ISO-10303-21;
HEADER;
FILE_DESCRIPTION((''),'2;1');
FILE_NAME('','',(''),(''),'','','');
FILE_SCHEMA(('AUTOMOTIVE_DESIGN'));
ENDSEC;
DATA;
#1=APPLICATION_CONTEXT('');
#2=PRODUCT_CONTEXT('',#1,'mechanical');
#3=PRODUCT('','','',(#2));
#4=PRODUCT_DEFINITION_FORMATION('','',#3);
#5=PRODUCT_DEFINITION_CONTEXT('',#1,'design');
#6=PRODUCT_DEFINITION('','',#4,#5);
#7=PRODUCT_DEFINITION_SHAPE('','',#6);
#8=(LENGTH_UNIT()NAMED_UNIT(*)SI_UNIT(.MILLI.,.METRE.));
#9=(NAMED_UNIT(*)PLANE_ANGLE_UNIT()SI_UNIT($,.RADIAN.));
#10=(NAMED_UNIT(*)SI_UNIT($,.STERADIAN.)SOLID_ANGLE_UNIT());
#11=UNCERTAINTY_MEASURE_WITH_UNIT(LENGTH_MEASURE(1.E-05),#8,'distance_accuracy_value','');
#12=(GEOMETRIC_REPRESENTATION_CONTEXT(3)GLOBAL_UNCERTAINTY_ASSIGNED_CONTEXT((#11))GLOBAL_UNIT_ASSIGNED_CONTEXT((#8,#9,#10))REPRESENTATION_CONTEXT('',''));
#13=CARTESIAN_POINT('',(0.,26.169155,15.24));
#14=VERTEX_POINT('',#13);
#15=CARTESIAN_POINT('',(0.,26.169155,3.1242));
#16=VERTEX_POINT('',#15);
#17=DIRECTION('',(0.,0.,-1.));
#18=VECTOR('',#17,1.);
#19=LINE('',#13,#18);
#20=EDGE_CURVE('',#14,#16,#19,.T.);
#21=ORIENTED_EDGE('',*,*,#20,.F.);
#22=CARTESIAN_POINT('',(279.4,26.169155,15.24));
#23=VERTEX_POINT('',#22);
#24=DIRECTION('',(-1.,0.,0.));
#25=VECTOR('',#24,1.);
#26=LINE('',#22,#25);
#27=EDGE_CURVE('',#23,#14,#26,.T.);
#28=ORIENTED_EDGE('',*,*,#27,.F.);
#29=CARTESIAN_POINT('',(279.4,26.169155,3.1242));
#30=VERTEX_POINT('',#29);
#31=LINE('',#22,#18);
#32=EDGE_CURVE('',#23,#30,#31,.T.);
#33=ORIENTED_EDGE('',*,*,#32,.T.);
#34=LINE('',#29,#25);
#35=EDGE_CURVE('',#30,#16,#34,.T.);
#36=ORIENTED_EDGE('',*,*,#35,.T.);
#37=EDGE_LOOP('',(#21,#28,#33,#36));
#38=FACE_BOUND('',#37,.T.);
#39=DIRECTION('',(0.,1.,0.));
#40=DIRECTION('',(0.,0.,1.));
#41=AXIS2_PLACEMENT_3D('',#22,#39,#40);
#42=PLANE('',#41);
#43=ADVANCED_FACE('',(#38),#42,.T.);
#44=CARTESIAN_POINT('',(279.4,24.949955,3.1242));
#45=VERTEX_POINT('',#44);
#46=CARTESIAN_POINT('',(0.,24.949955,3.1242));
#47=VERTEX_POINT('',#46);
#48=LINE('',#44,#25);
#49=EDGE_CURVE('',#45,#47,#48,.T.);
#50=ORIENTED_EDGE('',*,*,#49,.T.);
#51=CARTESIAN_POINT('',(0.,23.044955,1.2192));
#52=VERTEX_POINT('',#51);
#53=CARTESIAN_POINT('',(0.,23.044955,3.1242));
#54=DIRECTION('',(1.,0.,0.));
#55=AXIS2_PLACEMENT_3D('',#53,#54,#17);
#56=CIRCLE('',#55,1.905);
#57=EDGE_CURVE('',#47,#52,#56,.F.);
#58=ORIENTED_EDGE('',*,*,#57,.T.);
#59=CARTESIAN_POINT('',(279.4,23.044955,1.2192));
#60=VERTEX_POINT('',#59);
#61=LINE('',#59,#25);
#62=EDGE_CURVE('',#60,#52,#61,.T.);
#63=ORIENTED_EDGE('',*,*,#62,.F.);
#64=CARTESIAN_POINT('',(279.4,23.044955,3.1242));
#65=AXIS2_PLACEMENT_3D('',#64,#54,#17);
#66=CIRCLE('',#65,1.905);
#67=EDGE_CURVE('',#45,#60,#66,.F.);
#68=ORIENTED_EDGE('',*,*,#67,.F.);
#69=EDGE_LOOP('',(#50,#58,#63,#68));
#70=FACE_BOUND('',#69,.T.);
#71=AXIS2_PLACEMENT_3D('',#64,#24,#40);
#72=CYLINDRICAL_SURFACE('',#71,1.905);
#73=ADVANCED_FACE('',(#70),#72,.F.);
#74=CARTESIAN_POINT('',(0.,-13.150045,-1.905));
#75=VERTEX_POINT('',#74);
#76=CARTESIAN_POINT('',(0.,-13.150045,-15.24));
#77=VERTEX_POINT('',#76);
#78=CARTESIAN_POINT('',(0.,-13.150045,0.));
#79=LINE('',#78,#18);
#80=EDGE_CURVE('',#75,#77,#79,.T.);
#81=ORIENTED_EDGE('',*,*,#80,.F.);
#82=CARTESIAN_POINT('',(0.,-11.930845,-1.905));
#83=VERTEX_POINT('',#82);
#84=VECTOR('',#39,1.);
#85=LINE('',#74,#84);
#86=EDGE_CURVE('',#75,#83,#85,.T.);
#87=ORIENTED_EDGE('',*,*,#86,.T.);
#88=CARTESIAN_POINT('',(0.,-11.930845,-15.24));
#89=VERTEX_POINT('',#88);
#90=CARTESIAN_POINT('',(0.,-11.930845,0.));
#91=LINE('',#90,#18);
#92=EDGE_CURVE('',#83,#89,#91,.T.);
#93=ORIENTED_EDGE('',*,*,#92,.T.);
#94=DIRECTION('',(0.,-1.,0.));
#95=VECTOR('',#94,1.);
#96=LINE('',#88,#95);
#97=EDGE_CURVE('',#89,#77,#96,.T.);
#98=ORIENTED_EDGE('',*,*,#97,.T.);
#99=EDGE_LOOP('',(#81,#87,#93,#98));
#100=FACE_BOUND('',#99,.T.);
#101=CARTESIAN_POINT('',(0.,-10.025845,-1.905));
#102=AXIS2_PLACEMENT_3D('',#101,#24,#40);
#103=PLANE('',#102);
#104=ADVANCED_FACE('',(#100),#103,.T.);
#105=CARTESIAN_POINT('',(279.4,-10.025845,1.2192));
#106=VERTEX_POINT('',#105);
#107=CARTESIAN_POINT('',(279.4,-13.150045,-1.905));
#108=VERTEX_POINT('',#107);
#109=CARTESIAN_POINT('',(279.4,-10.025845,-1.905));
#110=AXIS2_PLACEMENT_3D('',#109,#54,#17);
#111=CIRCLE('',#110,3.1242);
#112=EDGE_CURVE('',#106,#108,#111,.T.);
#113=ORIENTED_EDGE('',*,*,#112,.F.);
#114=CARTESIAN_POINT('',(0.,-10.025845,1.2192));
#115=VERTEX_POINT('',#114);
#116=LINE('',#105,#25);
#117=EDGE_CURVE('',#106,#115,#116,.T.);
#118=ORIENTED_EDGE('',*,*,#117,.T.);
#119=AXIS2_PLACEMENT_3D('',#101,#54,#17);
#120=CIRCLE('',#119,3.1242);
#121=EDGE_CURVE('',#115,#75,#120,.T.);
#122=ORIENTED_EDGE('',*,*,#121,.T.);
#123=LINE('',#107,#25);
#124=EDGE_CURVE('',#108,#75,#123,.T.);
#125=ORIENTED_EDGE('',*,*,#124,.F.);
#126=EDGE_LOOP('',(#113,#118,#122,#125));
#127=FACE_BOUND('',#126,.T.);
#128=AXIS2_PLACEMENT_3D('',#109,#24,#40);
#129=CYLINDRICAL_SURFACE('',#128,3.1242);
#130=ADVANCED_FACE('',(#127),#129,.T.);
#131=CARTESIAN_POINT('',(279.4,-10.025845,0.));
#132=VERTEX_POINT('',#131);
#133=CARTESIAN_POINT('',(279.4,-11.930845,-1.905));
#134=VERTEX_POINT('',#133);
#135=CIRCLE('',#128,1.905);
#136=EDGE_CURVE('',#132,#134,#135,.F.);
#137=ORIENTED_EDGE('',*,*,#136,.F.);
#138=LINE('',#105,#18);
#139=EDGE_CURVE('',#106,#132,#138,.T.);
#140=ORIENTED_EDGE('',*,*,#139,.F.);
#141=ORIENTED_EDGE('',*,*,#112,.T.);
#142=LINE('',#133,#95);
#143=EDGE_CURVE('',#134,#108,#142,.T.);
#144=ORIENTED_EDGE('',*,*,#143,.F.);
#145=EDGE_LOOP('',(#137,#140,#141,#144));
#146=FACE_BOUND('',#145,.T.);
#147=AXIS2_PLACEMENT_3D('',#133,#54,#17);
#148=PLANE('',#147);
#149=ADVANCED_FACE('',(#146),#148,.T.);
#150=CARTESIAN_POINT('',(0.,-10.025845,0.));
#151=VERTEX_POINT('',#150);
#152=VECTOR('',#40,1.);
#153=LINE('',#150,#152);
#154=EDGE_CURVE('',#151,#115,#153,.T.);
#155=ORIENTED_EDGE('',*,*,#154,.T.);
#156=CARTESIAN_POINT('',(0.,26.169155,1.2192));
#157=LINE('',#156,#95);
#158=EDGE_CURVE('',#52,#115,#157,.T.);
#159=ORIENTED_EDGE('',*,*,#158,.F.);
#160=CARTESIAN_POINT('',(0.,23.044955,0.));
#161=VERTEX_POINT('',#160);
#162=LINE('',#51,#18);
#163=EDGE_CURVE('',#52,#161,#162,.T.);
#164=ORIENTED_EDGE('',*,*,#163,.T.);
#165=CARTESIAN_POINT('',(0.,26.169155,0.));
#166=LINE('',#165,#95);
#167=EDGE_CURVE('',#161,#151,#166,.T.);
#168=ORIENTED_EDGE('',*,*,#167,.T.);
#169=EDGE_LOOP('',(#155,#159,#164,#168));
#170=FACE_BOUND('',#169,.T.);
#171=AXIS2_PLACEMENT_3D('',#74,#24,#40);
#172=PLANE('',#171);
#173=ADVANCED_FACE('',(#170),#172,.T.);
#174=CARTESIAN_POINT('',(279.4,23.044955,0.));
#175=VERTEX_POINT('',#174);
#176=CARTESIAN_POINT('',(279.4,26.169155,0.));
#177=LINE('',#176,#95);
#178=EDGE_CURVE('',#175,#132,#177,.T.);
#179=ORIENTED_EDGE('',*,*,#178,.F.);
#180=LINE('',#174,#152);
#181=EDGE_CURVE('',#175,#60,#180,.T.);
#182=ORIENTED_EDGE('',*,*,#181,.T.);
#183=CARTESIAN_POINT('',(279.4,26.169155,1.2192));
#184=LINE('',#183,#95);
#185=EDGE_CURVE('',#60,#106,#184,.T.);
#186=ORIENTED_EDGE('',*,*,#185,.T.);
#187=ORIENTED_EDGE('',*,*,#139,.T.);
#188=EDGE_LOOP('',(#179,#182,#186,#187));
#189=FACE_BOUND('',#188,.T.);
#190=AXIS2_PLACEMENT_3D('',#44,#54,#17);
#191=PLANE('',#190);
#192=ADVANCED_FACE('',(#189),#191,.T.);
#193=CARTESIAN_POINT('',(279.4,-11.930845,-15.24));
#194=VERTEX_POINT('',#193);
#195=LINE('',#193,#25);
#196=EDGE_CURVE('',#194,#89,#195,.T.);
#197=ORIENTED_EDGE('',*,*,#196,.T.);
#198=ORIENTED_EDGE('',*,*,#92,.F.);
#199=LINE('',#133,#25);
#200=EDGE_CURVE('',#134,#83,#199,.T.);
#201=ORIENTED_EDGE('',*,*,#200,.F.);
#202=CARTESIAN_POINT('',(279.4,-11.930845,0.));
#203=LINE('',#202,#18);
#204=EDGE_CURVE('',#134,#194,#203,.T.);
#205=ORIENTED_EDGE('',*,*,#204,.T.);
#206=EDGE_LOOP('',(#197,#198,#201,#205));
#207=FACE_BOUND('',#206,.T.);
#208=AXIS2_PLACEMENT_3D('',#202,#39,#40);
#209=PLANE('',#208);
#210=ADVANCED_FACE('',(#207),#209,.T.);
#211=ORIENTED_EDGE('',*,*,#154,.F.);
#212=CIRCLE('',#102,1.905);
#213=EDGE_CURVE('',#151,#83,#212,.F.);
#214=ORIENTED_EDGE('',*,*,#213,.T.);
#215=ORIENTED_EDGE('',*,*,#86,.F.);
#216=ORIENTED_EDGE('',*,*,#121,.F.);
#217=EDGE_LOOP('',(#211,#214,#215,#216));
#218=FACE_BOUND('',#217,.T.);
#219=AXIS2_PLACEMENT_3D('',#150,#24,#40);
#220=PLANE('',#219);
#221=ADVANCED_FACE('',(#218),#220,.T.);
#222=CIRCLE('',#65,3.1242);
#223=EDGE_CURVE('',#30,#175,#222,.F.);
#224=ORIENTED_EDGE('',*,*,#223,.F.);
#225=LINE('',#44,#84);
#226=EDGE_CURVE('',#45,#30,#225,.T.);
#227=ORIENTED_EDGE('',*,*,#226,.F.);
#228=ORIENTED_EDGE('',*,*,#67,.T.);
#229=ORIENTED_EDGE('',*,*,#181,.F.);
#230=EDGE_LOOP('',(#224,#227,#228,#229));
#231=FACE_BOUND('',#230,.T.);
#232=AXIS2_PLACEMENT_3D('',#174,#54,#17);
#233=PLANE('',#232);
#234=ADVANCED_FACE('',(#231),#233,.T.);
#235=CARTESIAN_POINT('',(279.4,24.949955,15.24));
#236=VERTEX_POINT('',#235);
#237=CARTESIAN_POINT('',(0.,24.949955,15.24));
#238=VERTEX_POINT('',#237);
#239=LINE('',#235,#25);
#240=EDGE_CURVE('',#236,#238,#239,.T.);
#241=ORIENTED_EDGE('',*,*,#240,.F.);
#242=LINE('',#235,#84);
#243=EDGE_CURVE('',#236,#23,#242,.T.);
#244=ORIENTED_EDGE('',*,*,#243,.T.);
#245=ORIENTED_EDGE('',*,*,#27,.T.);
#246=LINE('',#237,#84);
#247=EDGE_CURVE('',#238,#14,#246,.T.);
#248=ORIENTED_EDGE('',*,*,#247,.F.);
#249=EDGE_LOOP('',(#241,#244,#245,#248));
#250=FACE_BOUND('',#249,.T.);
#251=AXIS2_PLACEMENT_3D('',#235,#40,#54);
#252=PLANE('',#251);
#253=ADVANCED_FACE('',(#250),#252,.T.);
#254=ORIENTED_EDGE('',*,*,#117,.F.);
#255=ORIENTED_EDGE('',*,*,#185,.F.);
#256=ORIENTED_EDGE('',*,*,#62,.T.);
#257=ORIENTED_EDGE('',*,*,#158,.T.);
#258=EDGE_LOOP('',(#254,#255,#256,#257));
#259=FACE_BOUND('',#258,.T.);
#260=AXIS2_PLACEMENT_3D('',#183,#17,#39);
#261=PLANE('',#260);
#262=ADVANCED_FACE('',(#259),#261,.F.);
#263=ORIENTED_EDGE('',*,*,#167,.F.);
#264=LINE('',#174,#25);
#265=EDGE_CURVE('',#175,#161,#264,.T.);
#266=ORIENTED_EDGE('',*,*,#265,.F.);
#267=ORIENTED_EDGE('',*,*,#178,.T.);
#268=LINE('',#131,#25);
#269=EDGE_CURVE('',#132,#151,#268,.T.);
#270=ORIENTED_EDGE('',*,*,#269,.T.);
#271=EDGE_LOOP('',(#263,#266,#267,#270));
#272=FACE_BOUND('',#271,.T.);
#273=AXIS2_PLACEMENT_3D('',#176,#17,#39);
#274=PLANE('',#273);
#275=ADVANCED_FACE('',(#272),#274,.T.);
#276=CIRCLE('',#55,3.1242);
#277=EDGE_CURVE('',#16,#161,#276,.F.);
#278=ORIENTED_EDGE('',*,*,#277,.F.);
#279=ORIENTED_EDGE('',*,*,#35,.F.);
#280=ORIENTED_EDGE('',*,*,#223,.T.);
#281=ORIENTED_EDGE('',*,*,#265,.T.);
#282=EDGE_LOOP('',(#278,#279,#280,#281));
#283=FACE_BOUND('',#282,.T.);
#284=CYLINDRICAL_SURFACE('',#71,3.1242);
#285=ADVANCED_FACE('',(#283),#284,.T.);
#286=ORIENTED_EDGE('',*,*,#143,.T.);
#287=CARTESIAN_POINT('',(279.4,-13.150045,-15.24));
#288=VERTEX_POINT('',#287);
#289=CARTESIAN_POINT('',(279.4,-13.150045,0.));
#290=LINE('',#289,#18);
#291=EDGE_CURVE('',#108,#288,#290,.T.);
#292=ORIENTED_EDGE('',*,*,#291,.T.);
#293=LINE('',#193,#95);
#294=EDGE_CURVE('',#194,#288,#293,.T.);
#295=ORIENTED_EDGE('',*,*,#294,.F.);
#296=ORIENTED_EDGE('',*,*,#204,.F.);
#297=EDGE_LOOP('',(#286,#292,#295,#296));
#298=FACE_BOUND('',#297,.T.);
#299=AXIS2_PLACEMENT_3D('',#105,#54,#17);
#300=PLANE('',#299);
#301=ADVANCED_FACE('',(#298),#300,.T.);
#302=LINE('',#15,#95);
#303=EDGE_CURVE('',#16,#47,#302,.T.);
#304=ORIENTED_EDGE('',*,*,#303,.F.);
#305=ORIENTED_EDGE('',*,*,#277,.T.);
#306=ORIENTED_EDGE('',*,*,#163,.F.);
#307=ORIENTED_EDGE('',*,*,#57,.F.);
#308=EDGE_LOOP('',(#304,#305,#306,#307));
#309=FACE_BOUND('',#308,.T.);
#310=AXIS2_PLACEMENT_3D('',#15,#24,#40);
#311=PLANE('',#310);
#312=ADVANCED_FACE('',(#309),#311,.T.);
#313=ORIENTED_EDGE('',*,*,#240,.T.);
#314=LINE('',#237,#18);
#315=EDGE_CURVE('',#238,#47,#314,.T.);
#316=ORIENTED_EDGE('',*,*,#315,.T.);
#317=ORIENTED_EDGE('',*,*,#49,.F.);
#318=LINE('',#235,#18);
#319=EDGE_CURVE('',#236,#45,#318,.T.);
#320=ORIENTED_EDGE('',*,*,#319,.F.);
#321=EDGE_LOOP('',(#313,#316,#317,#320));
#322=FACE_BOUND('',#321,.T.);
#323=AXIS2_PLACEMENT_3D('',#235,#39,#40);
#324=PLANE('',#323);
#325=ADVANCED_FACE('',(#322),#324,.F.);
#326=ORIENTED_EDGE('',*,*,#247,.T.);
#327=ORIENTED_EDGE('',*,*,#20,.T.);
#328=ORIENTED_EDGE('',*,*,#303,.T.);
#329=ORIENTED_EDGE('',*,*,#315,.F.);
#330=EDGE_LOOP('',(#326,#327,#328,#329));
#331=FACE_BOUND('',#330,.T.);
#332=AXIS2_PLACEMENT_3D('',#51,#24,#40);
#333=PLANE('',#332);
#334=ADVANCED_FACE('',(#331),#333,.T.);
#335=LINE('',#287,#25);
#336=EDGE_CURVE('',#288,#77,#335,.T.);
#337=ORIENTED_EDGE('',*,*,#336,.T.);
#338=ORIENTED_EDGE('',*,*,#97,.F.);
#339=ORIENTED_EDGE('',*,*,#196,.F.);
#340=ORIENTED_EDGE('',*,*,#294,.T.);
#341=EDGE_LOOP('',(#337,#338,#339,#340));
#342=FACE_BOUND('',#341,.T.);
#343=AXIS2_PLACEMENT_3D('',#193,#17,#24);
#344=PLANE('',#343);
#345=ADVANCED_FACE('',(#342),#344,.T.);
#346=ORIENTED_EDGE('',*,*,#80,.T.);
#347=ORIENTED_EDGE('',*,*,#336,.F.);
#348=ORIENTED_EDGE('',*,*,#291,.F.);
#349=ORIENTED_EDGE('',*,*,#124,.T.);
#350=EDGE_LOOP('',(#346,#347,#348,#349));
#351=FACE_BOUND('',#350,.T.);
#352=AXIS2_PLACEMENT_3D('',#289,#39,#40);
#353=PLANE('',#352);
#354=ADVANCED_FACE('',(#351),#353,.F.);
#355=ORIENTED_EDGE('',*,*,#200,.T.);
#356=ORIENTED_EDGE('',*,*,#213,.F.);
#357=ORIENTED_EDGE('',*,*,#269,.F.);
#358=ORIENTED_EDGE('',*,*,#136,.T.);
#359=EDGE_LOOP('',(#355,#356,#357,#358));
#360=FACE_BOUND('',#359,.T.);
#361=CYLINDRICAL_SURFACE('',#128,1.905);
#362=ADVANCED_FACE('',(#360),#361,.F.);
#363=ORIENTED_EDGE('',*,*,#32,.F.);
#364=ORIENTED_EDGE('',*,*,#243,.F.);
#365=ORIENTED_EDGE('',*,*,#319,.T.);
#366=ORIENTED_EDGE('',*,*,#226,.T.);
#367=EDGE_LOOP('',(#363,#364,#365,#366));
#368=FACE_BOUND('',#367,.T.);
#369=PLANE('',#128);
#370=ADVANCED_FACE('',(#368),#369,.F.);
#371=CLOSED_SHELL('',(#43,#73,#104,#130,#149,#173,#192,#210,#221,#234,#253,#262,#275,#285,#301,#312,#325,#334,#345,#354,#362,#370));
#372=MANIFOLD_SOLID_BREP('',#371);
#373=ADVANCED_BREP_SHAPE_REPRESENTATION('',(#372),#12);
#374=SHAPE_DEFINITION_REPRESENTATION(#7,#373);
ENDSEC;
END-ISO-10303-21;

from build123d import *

# Parameters (mm, degrees)
BASE_FLANGE2_DEPTH = 279.4


# Sheet-metal steps are written as plain solids
with BuildPart() as part:
    # Sketch8 → Base-Flange2 (new body)
    with BuildSketch(Plane(origin=(0, 0, 0), x_dir=(0, 0, -1), z_dir=(1, 0, 0))):
        with BuildLine():
            Line((-15.24, 26.169154954), (-3.1242, 26.169154954))
            ThreePointArc((-3.1242, 26.169154954), (-0.915056994, 25.25409796), (0, 23.044954954))
            Line((0, 23.044954954), (0, -10.025845046))
            ThreePointArc((0, -10.025845046), (0.557961582, -11.372883464), (1.905, -11.930845046))
            Line((1.905, -11.930845046), (15.24, -11.930845046))
            Line((15.24, -11.930845046), (15.24, -13.150045046))
            Line((15.24, -13.150045046), (1.905, -13.150045046))
            ThreePointArc((1.905, -13.150045046), (-0.304143006, -12.234988051), (-1.2192, -10.025845046))
            Line((-1.2192, -10.025845046), (-1.2192, 23.044954954))
            ThreePointArc((-1.2192, 23.044954954), (-1.777161582, 24.391993373), (-3.1242, 24.949954954))
            Line((-3.1242, 24.949954954), (-15.24, 24.949954954))
            Line((-15.24, 24.949954954), (-15.24, 26.169154954))
        make_face()
    extrude(amount=BASE_FLANGE2_DEPTH)


solid = part.part
